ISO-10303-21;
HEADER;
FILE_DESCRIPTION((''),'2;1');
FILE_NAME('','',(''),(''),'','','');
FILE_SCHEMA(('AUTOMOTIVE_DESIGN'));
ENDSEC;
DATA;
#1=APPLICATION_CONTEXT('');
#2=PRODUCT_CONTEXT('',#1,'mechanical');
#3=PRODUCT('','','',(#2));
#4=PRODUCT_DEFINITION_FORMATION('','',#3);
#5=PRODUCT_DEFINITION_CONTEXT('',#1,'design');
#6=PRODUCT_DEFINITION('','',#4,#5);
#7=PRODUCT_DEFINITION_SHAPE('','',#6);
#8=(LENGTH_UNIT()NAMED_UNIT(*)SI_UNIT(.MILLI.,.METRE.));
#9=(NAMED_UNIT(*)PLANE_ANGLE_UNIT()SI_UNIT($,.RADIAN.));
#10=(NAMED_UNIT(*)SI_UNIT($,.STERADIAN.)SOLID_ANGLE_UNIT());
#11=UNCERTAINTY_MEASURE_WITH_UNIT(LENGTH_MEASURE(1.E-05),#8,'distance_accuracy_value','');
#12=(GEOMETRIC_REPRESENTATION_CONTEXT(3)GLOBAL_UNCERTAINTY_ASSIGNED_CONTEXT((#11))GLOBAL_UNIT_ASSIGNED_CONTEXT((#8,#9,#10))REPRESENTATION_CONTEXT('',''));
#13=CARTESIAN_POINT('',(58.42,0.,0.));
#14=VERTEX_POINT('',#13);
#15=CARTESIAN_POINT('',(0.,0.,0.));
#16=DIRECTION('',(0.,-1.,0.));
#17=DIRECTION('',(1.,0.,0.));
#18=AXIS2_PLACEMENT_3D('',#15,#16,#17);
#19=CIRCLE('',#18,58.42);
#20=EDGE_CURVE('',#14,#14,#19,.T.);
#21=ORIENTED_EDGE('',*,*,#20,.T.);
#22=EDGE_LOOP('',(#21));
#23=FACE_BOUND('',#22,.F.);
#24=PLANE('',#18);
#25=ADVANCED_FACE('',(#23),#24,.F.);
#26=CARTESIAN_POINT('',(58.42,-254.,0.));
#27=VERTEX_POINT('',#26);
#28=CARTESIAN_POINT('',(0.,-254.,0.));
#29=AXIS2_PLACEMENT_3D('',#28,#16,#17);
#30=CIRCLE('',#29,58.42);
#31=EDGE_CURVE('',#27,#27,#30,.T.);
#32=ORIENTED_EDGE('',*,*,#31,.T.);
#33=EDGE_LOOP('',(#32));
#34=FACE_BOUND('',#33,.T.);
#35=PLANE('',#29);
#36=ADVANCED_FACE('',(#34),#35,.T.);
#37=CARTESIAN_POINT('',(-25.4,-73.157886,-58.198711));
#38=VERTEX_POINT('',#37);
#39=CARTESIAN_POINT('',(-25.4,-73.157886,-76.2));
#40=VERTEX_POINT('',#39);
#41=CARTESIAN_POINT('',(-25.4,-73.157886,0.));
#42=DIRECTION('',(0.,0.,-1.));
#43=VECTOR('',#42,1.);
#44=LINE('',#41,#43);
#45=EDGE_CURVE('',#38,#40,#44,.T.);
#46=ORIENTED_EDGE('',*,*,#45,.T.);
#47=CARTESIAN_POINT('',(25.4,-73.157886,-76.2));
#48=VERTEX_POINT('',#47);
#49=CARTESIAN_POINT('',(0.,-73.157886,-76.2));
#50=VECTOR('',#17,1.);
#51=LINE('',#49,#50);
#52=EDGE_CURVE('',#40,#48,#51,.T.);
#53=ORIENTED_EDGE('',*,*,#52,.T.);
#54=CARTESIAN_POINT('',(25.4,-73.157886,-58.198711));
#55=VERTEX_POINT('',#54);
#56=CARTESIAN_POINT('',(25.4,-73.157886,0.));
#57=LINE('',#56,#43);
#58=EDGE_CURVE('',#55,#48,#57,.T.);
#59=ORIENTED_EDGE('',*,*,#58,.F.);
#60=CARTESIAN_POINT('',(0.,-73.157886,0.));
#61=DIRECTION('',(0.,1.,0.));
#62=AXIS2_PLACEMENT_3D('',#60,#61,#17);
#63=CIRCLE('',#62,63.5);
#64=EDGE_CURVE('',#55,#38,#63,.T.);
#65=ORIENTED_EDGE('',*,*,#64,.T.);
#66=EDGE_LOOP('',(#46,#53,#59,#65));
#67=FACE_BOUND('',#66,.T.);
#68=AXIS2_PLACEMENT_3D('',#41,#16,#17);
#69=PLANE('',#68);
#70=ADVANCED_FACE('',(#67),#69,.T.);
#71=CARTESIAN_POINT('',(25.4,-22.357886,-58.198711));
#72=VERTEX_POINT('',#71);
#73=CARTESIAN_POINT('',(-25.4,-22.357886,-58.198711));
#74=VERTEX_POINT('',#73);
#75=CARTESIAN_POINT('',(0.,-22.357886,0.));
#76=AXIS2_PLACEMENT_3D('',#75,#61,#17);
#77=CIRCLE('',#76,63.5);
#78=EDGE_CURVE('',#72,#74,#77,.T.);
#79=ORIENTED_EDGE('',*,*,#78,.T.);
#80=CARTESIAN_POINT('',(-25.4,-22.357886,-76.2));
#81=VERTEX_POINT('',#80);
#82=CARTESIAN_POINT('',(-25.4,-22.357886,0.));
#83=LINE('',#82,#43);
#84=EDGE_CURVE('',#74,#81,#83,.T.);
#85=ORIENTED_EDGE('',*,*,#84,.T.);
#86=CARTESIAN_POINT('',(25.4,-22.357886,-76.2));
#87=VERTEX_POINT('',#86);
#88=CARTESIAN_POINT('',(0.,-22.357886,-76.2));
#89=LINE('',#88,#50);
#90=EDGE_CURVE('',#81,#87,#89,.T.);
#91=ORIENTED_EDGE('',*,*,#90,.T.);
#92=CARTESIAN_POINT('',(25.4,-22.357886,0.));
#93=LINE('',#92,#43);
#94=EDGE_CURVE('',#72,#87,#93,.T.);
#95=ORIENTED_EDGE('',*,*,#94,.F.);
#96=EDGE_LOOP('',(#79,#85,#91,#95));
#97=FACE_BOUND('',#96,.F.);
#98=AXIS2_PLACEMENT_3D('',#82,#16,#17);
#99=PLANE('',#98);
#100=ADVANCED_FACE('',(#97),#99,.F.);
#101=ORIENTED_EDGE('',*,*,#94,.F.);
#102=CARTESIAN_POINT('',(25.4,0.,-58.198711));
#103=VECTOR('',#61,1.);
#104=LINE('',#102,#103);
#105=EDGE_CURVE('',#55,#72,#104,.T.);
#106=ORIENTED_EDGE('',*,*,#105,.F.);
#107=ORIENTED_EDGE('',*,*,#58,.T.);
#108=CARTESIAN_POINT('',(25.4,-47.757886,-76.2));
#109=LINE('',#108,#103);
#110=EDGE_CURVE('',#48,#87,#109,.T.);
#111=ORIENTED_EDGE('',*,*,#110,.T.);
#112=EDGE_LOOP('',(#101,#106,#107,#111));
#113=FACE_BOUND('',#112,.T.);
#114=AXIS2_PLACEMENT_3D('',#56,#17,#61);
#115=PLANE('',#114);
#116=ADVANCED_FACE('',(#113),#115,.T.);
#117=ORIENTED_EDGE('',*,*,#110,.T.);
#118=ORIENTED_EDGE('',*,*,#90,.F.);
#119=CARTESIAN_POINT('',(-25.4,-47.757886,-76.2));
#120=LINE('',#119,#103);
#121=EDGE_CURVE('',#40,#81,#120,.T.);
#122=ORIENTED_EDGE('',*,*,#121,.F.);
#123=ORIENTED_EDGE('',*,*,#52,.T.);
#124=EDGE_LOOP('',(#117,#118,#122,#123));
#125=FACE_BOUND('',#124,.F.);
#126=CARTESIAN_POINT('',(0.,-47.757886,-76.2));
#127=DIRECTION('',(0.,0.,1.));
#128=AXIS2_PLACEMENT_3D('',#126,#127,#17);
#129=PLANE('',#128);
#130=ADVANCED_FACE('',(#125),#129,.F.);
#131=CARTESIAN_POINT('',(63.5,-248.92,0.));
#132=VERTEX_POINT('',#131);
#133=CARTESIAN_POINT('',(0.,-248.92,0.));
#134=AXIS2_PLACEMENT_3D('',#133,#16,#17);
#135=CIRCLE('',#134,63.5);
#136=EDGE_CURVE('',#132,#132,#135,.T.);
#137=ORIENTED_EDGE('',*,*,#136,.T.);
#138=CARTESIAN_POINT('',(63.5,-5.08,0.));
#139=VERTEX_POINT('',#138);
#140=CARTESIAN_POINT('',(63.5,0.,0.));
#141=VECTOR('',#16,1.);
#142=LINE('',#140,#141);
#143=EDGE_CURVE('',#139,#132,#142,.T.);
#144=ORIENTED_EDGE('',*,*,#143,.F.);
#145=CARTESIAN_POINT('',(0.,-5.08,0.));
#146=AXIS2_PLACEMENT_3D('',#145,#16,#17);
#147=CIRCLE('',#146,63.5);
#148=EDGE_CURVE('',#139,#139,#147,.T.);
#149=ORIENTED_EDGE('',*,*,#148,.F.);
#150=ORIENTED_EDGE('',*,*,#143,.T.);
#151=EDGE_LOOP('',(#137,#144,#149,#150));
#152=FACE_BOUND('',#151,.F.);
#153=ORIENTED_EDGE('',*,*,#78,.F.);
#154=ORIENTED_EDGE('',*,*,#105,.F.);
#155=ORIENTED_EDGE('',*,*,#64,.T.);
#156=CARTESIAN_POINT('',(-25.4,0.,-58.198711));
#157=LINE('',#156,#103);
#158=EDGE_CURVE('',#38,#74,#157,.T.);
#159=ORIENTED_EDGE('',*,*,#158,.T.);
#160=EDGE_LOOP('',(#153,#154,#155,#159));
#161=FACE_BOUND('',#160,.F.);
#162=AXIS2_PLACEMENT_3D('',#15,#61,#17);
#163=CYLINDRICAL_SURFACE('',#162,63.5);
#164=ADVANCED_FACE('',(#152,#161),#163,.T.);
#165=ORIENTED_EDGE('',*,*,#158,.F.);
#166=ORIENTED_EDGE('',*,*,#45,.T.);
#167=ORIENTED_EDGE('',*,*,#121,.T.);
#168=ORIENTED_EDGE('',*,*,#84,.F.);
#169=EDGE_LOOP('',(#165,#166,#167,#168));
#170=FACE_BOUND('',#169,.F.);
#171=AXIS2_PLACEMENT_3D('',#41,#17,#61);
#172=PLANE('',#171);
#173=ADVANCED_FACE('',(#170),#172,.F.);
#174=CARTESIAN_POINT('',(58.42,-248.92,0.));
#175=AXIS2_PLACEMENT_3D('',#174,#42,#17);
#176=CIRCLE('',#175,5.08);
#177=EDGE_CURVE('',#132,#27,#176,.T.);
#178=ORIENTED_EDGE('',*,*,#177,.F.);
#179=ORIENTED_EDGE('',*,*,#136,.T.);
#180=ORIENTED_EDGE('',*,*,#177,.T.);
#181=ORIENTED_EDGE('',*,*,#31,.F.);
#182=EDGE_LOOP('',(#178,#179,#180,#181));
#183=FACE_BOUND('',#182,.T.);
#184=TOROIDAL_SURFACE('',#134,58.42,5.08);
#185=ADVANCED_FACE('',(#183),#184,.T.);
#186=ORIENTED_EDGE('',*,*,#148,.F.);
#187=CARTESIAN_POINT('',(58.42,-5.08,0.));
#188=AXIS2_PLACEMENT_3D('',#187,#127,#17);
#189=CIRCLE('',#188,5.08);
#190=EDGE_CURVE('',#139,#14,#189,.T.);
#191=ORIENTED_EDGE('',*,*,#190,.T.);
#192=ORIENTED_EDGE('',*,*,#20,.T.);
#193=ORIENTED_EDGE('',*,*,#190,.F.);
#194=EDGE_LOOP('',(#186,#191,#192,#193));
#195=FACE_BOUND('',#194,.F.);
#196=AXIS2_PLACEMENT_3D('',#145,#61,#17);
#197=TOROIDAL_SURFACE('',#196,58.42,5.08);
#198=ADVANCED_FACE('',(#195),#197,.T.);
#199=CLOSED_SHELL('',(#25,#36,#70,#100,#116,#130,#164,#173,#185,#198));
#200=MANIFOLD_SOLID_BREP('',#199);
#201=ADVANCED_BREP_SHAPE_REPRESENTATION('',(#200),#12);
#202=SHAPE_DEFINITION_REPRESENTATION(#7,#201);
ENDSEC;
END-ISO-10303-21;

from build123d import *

# Parameters (mm, degrees)
F0_R     = 63.5
F1_DEPTH = 254
F4_R     = 5.08
F5_W     = 50.8
F5_H     = 50.8
F6_DEPTH = 76.2


# Not quite as in the source:
# - the program builds the solid bodies; features that only make, move or delete a surface that nothing else refers to are left out


with BuildPart() as f1:
    # F0 (on Front) → F1 (new body)
    with BuildSketch(Plane.XZ):
        Circle(F0_R)
    extrude(amount=F1_DEPTH)

    # F4
    f4_edges = [f1.edges().sort_by_distance(p)[0] for p in [
        (-63.5, -254, 0),
        (-63.5, 0, 0),
    ]]
    fillet(f4_edges, radius=F4_R)

    # F5 (on Top) → F6 (join)
    with BuildSketch(Plane.XY):
        with Locations((0, -47.7578863502)):
            Rectangle(F5_W, F5_H)
    extrude(amount=-F6_DEPTH)


solid = f1.part
